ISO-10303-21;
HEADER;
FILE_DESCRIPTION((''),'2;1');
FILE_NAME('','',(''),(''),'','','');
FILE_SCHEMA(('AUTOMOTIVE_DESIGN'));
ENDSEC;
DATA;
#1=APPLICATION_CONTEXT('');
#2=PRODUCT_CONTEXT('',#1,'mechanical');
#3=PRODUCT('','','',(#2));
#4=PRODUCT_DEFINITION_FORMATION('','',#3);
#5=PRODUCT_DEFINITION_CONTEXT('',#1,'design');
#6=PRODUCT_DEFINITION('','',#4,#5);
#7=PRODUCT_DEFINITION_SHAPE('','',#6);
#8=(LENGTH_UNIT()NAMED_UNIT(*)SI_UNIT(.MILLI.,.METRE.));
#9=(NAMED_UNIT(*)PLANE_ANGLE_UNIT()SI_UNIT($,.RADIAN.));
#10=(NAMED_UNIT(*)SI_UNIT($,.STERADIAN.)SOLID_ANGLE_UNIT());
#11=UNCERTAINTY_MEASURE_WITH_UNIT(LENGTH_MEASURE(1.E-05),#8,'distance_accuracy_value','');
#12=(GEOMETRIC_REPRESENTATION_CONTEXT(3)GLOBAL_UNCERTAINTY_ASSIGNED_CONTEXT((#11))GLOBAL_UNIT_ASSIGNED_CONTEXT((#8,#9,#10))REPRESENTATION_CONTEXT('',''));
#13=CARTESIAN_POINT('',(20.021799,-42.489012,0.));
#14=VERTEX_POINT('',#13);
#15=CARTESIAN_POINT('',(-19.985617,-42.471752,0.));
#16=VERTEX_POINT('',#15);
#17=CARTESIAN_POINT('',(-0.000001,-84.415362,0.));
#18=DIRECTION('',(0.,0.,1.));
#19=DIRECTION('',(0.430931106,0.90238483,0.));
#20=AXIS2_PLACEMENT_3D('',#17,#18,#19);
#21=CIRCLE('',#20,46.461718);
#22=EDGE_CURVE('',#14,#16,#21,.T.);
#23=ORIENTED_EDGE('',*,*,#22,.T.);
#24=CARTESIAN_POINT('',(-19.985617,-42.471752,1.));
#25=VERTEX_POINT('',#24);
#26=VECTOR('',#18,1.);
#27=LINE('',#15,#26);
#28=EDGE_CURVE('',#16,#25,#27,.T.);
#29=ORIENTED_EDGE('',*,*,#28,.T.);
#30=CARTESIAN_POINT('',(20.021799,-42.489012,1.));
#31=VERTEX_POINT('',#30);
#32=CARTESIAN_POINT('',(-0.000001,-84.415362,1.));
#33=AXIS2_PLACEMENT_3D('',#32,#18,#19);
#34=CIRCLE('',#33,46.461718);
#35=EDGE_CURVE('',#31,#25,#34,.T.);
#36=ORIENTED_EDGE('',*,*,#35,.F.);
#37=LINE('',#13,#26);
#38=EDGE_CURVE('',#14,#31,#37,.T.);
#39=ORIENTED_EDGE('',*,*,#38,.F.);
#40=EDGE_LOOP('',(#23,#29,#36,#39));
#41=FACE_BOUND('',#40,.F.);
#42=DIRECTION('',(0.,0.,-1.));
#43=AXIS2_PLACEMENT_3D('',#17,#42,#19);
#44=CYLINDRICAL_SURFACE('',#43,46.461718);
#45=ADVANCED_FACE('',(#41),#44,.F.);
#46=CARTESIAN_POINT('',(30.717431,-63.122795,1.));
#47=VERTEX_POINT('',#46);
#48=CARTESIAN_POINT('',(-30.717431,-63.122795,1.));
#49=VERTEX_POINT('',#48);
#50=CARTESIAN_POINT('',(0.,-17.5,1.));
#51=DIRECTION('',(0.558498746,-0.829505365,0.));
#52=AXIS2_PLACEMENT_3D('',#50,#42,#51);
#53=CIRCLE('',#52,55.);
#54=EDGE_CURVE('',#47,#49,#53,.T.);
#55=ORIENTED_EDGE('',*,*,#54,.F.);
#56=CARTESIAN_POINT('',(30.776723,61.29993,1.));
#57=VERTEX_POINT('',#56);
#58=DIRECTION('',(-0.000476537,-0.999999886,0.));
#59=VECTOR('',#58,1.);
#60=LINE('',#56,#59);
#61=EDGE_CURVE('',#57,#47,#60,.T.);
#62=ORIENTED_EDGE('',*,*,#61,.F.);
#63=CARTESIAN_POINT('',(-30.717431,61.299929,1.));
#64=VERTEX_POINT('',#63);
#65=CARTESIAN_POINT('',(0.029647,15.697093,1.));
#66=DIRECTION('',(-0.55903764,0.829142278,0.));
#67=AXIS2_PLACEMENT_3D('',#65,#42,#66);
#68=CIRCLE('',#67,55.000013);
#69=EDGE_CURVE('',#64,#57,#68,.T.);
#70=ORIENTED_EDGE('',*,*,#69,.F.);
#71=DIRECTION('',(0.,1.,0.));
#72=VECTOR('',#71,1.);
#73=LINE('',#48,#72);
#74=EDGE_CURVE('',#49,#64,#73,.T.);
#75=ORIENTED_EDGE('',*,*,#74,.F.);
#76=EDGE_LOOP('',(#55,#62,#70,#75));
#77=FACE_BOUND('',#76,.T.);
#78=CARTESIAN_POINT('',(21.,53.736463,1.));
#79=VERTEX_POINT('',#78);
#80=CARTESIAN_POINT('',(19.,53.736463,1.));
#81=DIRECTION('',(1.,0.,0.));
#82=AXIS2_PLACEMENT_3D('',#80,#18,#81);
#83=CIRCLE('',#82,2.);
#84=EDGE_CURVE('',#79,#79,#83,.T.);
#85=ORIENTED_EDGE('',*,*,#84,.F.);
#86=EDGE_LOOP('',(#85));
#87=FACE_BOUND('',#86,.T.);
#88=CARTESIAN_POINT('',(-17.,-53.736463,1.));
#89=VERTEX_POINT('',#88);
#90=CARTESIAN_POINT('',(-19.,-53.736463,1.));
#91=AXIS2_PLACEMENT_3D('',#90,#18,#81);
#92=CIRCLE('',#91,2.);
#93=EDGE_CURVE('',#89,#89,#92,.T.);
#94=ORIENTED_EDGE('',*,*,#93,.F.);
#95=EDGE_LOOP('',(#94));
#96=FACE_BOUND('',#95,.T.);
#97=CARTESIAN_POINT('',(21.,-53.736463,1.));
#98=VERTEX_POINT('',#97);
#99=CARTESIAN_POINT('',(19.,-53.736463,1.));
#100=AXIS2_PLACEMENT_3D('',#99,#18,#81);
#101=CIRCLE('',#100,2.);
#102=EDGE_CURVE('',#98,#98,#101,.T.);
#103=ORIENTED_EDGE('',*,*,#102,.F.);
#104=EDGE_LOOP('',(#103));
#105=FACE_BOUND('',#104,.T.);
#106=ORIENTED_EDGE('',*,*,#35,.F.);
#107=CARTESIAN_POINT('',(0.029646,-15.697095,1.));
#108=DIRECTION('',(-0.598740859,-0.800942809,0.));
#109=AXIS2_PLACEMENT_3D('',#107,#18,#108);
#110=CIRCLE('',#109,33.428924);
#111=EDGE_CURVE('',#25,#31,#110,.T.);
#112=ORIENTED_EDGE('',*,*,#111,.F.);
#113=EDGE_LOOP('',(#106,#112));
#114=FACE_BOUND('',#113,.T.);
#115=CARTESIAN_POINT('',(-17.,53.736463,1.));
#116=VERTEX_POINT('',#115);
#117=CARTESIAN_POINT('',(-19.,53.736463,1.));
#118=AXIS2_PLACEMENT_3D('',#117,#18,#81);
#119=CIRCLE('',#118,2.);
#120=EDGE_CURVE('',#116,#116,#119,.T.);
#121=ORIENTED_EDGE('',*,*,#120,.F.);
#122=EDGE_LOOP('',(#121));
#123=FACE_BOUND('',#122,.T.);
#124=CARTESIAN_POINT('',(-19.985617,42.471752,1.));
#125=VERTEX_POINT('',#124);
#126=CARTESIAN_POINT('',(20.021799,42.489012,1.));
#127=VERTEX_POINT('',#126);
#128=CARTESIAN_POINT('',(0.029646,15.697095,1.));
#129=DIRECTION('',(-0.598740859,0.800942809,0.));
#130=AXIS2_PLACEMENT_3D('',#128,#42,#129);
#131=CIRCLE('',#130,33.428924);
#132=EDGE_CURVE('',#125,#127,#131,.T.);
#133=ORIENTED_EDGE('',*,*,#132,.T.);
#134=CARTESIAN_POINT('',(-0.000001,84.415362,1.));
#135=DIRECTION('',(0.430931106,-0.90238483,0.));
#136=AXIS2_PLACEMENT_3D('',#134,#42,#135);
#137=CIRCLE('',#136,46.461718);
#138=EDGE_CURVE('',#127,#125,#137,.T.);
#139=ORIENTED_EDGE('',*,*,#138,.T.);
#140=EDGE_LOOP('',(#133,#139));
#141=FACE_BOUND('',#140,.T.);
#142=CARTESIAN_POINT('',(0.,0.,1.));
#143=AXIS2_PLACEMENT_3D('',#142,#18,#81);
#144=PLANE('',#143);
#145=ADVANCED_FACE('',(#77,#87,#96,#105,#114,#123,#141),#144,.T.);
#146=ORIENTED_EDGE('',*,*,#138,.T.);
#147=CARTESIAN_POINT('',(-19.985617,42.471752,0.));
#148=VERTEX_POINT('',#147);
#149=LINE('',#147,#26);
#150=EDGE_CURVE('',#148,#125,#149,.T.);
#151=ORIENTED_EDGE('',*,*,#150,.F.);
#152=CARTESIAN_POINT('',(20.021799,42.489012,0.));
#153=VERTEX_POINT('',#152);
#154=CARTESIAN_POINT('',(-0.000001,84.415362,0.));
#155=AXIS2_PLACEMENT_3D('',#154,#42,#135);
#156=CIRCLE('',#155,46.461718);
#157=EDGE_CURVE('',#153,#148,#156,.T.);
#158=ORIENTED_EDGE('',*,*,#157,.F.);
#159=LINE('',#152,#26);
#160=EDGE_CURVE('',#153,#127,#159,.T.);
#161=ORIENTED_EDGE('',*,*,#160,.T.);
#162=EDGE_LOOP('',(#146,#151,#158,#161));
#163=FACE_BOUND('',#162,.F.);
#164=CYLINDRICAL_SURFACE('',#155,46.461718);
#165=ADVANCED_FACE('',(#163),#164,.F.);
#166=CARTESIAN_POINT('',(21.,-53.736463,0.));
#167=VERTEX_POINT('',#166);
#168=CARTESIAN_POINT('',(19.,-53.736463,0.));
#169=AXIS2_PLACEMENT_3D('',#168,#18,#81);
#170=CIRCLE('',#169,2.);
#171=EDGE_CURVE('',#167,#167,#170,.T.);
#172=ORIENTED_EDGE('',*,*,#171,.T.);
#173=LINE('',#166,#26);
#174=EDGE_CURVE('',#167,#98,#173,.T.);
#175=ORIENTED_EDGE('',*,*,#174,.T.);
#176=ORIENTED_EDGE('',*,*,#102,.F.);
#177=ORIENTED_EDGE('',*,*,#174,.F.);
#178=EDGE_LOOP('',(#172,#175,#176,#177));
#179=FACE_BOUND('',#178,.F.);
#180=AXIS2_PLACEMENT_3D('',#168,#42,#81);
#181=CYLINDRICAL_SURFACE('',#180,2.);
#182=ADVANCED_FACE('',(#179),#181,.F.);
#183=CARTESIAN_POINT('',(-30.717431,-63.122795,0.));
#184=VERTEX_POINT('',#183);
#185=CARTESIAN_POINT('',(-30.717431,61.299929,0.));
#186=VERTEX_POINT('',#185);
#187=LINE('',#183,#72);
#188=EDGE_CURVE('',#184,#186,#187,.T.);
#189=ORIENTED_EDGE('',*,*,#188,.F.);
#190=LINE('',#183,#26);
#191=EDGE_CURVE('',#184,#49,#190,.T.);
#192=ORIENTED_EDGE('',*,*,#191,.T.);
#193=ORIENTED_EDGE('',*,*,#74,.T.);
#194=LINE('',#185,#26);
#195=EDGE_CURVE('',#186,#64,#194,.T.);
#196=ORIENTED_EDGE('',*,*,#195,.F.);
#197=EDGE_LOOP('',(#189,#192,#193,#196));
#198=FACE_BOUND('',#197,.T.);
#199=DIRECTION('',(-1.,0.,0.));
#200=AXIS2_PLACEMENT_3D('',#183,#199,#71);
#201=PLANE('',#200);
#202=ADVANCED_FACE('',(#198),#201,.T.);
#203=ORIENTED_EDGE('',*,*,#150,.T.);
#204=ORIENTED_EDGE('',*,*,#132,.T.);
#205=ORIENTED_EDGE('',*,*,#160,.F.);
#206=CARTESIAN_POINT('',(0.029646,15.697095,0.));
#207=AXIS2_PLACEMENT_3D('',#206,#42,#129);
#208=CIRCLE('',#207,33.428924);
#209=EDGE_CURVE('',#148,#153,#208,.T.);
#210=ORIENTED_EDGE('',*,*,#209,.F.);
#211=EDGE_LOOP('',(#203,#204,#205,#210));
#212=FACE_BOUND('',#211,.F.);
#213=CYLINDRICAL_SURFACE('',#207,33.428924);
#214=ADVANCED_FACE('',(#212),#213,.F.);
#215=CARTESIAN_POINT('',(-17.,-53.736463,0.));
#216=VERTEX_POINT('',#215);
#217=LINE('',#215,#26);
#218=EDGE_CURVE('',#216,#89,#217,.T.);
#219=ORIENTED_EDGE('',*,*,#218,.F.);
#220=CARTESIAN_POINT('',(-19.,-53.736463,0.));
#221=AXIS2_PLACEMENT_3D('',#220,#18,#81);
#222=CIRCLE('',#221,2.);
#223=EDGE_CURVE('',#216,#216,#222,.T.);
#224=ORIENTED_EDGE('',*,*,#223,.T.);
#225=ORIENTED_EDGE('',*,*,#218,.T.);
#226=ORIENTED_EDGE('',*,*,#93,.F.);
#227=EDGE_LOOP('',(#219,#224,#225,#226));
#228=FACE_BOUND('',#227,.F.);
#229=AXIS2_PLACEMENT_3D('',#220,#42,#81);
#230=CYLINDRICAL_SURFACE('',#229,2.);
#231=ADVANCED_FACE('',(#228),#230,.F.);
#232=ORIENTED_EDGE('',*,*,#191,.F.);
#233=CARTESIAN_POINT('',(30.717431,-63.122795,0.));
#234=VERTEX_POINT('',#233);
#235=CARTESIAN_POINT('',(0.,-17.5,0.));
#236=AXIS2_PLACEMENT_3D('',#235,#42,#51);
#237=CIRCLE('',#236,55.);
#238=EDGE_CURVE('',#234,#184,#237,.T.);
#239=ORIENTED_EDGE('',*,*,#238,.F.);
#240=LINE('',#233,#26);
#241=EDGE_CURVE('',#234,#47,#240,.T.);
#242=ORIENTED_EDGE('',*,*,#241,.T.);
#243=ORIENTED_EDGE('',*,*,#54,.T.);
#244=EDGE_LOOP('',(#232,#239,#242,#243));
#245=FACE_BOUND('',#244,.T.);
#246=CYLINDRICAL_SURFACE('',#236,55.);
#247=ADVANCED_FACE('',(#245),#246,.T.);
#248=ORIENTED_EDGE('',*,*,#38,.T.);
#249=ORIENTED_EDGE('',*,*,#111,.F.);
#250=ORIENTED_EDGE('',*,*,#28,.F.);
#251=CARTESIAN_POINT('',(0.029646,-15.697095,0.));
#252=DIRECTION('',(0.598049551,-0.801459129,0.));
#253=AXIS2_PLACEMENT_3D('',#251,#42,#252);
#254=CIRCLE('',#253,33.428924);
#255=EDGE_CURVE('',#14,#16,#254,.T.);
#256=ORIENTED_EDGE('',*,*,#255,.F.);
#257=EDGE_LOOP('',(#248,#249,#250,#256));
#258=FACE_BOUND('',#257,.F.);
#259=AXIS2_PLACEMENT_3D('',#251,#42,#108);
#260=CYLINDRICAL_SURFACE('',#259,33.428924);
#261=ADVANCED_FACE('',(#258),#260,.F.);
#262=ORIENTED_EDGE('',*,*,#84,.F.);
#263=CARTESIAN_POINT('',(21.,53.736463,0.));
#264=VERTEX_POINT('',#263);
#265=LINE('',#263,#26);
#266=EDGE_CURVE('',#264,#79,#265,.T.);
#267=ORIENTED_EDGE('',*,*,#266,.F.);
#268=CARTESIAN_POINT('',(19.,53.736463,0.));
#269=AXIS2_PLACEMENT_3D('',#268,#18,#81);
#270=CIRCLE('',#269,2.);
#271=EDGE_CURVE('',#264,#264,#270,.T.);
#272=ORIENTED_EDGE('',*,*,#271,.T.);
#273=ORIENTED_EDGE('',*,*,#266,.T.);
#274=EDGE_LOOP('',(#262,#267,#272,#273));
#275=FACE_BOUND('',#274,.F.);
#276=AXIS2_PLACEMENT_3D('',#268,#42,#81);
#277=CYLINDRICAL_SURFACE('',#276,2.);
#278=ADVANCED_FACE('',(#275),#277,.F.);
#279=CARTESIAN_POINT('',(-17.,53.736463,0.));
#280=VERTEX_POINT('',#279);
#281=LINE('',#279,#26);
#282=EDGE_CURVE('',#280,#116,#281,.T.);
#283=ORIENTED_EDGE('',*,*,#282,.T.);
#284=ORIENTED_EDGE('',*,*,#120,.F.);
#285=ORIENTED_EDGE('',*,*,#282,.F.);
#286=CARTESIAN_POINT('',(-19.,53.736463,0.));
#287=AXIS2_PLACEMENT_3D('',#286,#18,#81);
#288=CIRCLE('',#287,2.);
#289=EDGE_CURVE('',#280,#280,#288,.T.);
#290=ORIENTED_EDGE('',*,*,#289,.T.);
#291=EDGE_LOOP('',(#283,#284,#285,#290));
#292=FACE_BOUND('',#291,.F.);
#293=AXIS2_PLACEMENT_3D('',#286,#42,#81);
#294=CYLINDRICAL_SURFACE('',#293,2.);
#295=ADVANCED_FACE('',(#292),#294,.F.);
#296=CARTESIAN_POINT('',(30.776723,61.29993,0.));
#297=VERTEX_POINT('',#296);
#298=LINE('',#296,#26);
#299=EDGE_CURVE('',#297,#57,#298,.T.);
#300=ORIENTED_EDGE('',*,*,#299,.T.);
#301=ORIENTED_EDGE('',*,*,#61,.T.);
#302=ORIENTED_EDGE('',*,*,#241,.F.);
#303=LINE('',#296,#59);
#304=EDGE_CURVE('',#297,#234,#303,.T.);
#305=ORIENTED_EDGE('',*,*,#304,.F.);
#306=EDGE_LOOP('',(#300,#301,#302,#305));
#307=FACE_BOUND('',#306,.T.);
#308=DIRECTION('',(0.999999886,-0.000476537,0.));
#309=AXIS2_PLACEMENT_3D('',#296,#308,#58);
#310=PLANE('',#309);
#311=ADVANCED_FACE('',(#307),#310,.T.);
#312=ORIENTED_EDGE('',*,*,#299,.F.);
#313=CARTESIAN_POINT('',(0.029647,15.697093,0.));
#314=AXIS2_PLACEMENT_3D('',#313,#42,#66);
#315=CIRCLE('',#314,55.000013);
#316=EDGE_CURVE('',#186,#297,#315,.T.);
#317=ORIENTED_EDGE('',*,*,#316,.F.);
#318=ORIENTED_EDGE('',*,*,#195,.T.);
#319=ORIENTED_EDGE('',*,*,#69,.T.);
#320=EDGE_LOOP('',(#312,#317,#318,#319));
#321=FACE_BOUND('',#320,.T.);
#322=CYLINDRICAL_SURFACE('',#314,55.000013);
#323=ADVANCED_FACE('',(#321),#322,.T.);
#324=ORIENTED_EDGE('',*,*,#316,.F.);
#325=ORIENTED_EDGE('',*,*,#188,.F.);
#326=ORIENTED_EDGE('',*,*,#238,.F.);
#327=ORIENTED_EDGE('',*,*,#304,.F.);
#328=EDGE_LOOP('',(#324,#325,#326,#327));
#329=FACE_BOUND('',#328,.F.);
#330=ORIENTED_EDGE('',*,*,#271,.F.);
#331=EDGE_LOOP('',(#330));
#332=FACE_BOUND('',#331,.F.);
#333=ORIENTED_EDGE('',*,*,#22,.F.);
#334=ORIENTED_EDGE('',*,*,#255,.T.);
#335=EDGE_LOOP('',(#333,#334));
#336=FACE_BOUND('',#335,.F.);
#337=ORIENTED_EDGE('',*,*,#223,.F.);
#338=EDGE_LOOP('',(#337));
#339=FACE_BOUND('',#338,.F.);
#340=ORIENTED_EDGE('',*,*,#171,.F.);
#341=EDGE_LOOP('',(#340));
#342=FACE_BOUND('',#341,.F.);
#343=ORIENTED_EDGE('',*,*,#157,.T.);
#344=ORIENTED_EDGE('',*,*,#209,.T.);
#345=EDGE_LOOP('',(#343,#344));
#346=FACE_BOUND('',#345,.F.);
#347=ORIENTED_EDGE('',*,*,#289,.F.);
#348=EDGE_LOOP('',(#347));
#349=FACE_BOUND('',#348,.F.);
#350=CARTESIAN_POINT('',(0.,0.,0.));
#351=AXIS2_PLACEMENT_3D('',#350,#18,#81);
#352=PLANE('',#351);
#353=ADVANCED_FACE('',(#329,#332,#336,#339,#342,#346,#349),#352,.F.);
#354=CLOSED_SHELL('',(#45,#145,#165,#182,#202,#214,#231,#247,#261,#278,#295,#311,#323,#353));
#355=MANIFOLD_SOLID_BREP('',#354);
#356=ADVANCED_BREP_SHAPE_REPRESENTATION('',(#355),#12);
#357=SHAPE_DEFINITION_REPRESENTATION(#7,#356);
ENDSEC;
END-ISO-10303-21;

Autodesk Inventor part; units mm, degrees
ref_plane "YZ Plane" through (0, 0, 0) normal (1, 0, 0) x (0, 1, 0)
ref_plane "XZ Plane" through (0, 0, 0) normal (0, 1, 0) x (-1, 0, 0)
ref_plane "XY Plane" through (0, 0, 0) normal (0, 0, 1) x (1, 0, 0)
sketch "Szkic1" plane through (0, 0, 0) normal (0, 0, 1) x (1, 0, 0)
  circle A0 centre (-19, 53.736463) radius 2
  line L0 (0, -102.826606) -> (0, 109.459635)
  circle A1 centre (51.489502, -156.180896) radius 2
  circle A2 centre (-19, -53.736463) radius 2
  circle A3 centre (19, -53.736463) radius 2
  spline S0 degree 3 poles (-19.948357, 42.291714) (-7.484612, 36.499399) (6.838806, 36.499399) (19.884685, 42.334177) knots -2 -2 -2 -2 -1 -1 -1 -1
  spline S1 degree 3 poles (19.884685, 42.334177) (18.683547, 43.134298) (16.314211, 44.578944) (13.440795, 46.011363) (10.633281, 47.178527) (8.438356, 47.906787) (5.748573, 48.576507) (3.633449, 48.926153) (1.014806, 49.141741) (-1.070138, 49.1397) (-3.689231, 48.918937) (-5.805048, 48.565032) (-8.496008, 47.889736) (-10.692066, 47.156791) (-13.501106, 45.983476) (-16.376096, 44.544624) (-18.746641, 43.094581) (-19.948357, 42.291714) knots -1.92878405 -1.92878405 -1.92878405 -1.92878405 -1.85742515 -1.78606626 -1.75038681 -1.67902792 -1.64334847 -1.57198957 -1.53631013 -1.46495123 -1.42927178 -1.35791289 -1.32223344 -1.25087454 -1.2151951 -1.1438362 -1.0724773 -1.0724773 -1.0724773 -1.0724773
  spline S2 degree 3 poles (-19.948357, -42.291714) (-7.484612, -36.499399) (6.838806, -36.499399) (19.884685, -42.334177) (19.887771, -42.335557) (19.890857, -42.336938) (19.893943, -42.338318) knots -2 -2 -2 -2 -1 -1 -1 -0.99976344 -0.99976344 -0.99976344 -0.99976344
  arc A4 (10.816477, 63.441394) -> (10.816477, 63.441394) centre (0.029646, 15.697095) ccw
  line L1 (-30.717431, -63.122795) -> (-30.717431, 61.299929)
  line L2 (30.776723, 61.29993) -> (30.717431, -63.122795)
  arc A5 (46.460279, 45.179229) -> (46.388819, 45.291469) centre (0.029646, 15.697095) ccw
  arc A6 (30.776723, 61.29993) -> (-30.717431, 61.299929) centre (0.029646, 15.697095) ccw
  arc A7 (-30.717431, -63.122795) -> (30.717431, -63.122795) centre (0, -17.5) ccw
  spline S3 degree 3 poles (19.884685, -42.334177) (18.683547, -43.134298) (16.314211, -44.578944) (13.440795, -46.011363) (10.633281, -47.178527) (8.438356, -47.906787) (5.748573, -48.576507) (3.633449, -48.926153) (1.014806, -49.141741) (-1.070138, -49.1397) (-3.689231, -48.918937) (-5.805048, -48.565032) (-8.496008, -47.889736) (-10.692066, -47.156791) (-13.501106, -45.983476) (-16.376096, -44.544624) (-18.746641, -43.094581) (-19.948357, -42.291714) knots -1.92878405 -1.92878405 -1.92878405 -1.92878405 -1.85742515 -1.78606626 -1.75038681 -1.67902792 -1.64334847 -1.57198957 -1.53631013 -1.46495123 -1.42927178 -1.35791289 -1.32223344 -1.25087454 -1.2151951 -1.1438362 -1.0724773 -1.0724773 -1.0724773 -1.0724773
  arc A8 (-19.985617, 42.471752) -> (20.021799, 42.489012) centre (0, 84.415359) ccw
  arc A9 (20.021799, 42.489012) -> (-19.985617, 42.471752) centre (0.029646, 15.697095) ccw
  arc A10 (31.190436, 27.800736) -> (30.76126, 28.852355) centre (0.029646, 15.697095) ccw
  line L3 (-47.966946, 0) -> (72.77966, 0)
  arc A11 (20.021799, -42.489012) -> (-19.985617, -42.471752) centre (0, -84.415359) ccw
  arc A12 (-19.985617, -42.471752) -> (20.021799, -42.489012) centre (0.029646, -15.697095) ccw
  line L4 (0, -211.709002) -> (0, 162.987741)
  circle A13 centre (19, 53.736463) radius 2
  point P0 (0, 0)
  point P1 (0.029639, 15.697104)
  dimension "d0" = 4
sketch "Szkic1 outline for Wyciągnięcie proste1" plane through (0, 0, 0) normal (0, 0, 1) x (1, 0, 0)
  line L0 (-30.717431, -63.122795) -> (-30.717431, 61.299929)
  arc A0 (30.717431, -63.122795) -> (-30.717431, -63.122795) centre (0, -17.5) cw
  arc A1 (-30.717431, 61.299929) -> (30.776723, 61.29993) centre (0.029646, 15.697095) cw
  line L1 (30.776723, 61.29993) -> (30.717431, -63.122795)
  circle A2 centre (-19, -53.736463) radius 2
  arc A3 (20.021799, -42.489012) -> (-19.985617, -42.471752) centre (0, -84.415359) ccw
  arc A4 (-19.985617, -42.471752) -> (20.021799, -42.489012) centre (0.029646, -15.697095) ccw
  circle A5 centre (19, -53.736463) radius 2
  circle A6 centre (-19, 53.736463) radius 2
  arc A7 (-19.985617, 42.471752) -> (20.021799, 42.489012) centre (0.029646, 15.697095) cw
  arc A8 (20.021799, 42.489012) -> (-19.985617, 42.471752) centre (0, 84.415359) cw
  circle A9 centre (19, 53.736463) radius 2
extrude "Wyciągnięcie proste1" add sketch "Szkic1 outline for Wyciągnięcie proste1" along normal blind 1
sketch "Szkic2" plane through (0, 0, 1) normal (0, 0, 1) x (1, 0, 0)
  spline S0 degree 3 poles (19.066093, -42.869125) (17.919263, -43.604012) (15.656614, -44.931314) (12.910224, -46.24893) (10.224207, -47.323895) (8.121883, -47.995773) (5.542498, -48.61482) (3.51191, -48.938928) (0.996255, -49.139822) (-1.007288, -49.139431) (-3.523026, -48.937545) (-5.553743, -48.612623) (-8.133347, -47.992513) (-10.235885, -47.319744) (-12.922191, -46.24361) (-15.668883, -44.924773) (-17.931768, -43.596446) (-19.078711, -42.861037) knots 1.08873831 1.08873831 1.08873831 1.08873831 1.15730288 1.22586745 1.26014974 1.32871431 1.36299659 1.43156116 1.46584345 1.53440802 1.5686903 1.63725487 1.67153715 1.74010172 1.77438401 1.84294858 1.91151315 1.91151315 1.91151315 1.91151315
  spline S1 degree 2 poles (-19.078711, -42.861037) (-0.031622, -36.330707) (19.066093, -42.869125) knots 1.17954056 1.17954056 1.17954056 1.82085643 1.82085643 1.82085643
  point P0 (0, 0)
extrude "Wyciągnięcie proste2" cut sketch "Szkic2" against normal through all
properties part number "plyta_odbiornik"
